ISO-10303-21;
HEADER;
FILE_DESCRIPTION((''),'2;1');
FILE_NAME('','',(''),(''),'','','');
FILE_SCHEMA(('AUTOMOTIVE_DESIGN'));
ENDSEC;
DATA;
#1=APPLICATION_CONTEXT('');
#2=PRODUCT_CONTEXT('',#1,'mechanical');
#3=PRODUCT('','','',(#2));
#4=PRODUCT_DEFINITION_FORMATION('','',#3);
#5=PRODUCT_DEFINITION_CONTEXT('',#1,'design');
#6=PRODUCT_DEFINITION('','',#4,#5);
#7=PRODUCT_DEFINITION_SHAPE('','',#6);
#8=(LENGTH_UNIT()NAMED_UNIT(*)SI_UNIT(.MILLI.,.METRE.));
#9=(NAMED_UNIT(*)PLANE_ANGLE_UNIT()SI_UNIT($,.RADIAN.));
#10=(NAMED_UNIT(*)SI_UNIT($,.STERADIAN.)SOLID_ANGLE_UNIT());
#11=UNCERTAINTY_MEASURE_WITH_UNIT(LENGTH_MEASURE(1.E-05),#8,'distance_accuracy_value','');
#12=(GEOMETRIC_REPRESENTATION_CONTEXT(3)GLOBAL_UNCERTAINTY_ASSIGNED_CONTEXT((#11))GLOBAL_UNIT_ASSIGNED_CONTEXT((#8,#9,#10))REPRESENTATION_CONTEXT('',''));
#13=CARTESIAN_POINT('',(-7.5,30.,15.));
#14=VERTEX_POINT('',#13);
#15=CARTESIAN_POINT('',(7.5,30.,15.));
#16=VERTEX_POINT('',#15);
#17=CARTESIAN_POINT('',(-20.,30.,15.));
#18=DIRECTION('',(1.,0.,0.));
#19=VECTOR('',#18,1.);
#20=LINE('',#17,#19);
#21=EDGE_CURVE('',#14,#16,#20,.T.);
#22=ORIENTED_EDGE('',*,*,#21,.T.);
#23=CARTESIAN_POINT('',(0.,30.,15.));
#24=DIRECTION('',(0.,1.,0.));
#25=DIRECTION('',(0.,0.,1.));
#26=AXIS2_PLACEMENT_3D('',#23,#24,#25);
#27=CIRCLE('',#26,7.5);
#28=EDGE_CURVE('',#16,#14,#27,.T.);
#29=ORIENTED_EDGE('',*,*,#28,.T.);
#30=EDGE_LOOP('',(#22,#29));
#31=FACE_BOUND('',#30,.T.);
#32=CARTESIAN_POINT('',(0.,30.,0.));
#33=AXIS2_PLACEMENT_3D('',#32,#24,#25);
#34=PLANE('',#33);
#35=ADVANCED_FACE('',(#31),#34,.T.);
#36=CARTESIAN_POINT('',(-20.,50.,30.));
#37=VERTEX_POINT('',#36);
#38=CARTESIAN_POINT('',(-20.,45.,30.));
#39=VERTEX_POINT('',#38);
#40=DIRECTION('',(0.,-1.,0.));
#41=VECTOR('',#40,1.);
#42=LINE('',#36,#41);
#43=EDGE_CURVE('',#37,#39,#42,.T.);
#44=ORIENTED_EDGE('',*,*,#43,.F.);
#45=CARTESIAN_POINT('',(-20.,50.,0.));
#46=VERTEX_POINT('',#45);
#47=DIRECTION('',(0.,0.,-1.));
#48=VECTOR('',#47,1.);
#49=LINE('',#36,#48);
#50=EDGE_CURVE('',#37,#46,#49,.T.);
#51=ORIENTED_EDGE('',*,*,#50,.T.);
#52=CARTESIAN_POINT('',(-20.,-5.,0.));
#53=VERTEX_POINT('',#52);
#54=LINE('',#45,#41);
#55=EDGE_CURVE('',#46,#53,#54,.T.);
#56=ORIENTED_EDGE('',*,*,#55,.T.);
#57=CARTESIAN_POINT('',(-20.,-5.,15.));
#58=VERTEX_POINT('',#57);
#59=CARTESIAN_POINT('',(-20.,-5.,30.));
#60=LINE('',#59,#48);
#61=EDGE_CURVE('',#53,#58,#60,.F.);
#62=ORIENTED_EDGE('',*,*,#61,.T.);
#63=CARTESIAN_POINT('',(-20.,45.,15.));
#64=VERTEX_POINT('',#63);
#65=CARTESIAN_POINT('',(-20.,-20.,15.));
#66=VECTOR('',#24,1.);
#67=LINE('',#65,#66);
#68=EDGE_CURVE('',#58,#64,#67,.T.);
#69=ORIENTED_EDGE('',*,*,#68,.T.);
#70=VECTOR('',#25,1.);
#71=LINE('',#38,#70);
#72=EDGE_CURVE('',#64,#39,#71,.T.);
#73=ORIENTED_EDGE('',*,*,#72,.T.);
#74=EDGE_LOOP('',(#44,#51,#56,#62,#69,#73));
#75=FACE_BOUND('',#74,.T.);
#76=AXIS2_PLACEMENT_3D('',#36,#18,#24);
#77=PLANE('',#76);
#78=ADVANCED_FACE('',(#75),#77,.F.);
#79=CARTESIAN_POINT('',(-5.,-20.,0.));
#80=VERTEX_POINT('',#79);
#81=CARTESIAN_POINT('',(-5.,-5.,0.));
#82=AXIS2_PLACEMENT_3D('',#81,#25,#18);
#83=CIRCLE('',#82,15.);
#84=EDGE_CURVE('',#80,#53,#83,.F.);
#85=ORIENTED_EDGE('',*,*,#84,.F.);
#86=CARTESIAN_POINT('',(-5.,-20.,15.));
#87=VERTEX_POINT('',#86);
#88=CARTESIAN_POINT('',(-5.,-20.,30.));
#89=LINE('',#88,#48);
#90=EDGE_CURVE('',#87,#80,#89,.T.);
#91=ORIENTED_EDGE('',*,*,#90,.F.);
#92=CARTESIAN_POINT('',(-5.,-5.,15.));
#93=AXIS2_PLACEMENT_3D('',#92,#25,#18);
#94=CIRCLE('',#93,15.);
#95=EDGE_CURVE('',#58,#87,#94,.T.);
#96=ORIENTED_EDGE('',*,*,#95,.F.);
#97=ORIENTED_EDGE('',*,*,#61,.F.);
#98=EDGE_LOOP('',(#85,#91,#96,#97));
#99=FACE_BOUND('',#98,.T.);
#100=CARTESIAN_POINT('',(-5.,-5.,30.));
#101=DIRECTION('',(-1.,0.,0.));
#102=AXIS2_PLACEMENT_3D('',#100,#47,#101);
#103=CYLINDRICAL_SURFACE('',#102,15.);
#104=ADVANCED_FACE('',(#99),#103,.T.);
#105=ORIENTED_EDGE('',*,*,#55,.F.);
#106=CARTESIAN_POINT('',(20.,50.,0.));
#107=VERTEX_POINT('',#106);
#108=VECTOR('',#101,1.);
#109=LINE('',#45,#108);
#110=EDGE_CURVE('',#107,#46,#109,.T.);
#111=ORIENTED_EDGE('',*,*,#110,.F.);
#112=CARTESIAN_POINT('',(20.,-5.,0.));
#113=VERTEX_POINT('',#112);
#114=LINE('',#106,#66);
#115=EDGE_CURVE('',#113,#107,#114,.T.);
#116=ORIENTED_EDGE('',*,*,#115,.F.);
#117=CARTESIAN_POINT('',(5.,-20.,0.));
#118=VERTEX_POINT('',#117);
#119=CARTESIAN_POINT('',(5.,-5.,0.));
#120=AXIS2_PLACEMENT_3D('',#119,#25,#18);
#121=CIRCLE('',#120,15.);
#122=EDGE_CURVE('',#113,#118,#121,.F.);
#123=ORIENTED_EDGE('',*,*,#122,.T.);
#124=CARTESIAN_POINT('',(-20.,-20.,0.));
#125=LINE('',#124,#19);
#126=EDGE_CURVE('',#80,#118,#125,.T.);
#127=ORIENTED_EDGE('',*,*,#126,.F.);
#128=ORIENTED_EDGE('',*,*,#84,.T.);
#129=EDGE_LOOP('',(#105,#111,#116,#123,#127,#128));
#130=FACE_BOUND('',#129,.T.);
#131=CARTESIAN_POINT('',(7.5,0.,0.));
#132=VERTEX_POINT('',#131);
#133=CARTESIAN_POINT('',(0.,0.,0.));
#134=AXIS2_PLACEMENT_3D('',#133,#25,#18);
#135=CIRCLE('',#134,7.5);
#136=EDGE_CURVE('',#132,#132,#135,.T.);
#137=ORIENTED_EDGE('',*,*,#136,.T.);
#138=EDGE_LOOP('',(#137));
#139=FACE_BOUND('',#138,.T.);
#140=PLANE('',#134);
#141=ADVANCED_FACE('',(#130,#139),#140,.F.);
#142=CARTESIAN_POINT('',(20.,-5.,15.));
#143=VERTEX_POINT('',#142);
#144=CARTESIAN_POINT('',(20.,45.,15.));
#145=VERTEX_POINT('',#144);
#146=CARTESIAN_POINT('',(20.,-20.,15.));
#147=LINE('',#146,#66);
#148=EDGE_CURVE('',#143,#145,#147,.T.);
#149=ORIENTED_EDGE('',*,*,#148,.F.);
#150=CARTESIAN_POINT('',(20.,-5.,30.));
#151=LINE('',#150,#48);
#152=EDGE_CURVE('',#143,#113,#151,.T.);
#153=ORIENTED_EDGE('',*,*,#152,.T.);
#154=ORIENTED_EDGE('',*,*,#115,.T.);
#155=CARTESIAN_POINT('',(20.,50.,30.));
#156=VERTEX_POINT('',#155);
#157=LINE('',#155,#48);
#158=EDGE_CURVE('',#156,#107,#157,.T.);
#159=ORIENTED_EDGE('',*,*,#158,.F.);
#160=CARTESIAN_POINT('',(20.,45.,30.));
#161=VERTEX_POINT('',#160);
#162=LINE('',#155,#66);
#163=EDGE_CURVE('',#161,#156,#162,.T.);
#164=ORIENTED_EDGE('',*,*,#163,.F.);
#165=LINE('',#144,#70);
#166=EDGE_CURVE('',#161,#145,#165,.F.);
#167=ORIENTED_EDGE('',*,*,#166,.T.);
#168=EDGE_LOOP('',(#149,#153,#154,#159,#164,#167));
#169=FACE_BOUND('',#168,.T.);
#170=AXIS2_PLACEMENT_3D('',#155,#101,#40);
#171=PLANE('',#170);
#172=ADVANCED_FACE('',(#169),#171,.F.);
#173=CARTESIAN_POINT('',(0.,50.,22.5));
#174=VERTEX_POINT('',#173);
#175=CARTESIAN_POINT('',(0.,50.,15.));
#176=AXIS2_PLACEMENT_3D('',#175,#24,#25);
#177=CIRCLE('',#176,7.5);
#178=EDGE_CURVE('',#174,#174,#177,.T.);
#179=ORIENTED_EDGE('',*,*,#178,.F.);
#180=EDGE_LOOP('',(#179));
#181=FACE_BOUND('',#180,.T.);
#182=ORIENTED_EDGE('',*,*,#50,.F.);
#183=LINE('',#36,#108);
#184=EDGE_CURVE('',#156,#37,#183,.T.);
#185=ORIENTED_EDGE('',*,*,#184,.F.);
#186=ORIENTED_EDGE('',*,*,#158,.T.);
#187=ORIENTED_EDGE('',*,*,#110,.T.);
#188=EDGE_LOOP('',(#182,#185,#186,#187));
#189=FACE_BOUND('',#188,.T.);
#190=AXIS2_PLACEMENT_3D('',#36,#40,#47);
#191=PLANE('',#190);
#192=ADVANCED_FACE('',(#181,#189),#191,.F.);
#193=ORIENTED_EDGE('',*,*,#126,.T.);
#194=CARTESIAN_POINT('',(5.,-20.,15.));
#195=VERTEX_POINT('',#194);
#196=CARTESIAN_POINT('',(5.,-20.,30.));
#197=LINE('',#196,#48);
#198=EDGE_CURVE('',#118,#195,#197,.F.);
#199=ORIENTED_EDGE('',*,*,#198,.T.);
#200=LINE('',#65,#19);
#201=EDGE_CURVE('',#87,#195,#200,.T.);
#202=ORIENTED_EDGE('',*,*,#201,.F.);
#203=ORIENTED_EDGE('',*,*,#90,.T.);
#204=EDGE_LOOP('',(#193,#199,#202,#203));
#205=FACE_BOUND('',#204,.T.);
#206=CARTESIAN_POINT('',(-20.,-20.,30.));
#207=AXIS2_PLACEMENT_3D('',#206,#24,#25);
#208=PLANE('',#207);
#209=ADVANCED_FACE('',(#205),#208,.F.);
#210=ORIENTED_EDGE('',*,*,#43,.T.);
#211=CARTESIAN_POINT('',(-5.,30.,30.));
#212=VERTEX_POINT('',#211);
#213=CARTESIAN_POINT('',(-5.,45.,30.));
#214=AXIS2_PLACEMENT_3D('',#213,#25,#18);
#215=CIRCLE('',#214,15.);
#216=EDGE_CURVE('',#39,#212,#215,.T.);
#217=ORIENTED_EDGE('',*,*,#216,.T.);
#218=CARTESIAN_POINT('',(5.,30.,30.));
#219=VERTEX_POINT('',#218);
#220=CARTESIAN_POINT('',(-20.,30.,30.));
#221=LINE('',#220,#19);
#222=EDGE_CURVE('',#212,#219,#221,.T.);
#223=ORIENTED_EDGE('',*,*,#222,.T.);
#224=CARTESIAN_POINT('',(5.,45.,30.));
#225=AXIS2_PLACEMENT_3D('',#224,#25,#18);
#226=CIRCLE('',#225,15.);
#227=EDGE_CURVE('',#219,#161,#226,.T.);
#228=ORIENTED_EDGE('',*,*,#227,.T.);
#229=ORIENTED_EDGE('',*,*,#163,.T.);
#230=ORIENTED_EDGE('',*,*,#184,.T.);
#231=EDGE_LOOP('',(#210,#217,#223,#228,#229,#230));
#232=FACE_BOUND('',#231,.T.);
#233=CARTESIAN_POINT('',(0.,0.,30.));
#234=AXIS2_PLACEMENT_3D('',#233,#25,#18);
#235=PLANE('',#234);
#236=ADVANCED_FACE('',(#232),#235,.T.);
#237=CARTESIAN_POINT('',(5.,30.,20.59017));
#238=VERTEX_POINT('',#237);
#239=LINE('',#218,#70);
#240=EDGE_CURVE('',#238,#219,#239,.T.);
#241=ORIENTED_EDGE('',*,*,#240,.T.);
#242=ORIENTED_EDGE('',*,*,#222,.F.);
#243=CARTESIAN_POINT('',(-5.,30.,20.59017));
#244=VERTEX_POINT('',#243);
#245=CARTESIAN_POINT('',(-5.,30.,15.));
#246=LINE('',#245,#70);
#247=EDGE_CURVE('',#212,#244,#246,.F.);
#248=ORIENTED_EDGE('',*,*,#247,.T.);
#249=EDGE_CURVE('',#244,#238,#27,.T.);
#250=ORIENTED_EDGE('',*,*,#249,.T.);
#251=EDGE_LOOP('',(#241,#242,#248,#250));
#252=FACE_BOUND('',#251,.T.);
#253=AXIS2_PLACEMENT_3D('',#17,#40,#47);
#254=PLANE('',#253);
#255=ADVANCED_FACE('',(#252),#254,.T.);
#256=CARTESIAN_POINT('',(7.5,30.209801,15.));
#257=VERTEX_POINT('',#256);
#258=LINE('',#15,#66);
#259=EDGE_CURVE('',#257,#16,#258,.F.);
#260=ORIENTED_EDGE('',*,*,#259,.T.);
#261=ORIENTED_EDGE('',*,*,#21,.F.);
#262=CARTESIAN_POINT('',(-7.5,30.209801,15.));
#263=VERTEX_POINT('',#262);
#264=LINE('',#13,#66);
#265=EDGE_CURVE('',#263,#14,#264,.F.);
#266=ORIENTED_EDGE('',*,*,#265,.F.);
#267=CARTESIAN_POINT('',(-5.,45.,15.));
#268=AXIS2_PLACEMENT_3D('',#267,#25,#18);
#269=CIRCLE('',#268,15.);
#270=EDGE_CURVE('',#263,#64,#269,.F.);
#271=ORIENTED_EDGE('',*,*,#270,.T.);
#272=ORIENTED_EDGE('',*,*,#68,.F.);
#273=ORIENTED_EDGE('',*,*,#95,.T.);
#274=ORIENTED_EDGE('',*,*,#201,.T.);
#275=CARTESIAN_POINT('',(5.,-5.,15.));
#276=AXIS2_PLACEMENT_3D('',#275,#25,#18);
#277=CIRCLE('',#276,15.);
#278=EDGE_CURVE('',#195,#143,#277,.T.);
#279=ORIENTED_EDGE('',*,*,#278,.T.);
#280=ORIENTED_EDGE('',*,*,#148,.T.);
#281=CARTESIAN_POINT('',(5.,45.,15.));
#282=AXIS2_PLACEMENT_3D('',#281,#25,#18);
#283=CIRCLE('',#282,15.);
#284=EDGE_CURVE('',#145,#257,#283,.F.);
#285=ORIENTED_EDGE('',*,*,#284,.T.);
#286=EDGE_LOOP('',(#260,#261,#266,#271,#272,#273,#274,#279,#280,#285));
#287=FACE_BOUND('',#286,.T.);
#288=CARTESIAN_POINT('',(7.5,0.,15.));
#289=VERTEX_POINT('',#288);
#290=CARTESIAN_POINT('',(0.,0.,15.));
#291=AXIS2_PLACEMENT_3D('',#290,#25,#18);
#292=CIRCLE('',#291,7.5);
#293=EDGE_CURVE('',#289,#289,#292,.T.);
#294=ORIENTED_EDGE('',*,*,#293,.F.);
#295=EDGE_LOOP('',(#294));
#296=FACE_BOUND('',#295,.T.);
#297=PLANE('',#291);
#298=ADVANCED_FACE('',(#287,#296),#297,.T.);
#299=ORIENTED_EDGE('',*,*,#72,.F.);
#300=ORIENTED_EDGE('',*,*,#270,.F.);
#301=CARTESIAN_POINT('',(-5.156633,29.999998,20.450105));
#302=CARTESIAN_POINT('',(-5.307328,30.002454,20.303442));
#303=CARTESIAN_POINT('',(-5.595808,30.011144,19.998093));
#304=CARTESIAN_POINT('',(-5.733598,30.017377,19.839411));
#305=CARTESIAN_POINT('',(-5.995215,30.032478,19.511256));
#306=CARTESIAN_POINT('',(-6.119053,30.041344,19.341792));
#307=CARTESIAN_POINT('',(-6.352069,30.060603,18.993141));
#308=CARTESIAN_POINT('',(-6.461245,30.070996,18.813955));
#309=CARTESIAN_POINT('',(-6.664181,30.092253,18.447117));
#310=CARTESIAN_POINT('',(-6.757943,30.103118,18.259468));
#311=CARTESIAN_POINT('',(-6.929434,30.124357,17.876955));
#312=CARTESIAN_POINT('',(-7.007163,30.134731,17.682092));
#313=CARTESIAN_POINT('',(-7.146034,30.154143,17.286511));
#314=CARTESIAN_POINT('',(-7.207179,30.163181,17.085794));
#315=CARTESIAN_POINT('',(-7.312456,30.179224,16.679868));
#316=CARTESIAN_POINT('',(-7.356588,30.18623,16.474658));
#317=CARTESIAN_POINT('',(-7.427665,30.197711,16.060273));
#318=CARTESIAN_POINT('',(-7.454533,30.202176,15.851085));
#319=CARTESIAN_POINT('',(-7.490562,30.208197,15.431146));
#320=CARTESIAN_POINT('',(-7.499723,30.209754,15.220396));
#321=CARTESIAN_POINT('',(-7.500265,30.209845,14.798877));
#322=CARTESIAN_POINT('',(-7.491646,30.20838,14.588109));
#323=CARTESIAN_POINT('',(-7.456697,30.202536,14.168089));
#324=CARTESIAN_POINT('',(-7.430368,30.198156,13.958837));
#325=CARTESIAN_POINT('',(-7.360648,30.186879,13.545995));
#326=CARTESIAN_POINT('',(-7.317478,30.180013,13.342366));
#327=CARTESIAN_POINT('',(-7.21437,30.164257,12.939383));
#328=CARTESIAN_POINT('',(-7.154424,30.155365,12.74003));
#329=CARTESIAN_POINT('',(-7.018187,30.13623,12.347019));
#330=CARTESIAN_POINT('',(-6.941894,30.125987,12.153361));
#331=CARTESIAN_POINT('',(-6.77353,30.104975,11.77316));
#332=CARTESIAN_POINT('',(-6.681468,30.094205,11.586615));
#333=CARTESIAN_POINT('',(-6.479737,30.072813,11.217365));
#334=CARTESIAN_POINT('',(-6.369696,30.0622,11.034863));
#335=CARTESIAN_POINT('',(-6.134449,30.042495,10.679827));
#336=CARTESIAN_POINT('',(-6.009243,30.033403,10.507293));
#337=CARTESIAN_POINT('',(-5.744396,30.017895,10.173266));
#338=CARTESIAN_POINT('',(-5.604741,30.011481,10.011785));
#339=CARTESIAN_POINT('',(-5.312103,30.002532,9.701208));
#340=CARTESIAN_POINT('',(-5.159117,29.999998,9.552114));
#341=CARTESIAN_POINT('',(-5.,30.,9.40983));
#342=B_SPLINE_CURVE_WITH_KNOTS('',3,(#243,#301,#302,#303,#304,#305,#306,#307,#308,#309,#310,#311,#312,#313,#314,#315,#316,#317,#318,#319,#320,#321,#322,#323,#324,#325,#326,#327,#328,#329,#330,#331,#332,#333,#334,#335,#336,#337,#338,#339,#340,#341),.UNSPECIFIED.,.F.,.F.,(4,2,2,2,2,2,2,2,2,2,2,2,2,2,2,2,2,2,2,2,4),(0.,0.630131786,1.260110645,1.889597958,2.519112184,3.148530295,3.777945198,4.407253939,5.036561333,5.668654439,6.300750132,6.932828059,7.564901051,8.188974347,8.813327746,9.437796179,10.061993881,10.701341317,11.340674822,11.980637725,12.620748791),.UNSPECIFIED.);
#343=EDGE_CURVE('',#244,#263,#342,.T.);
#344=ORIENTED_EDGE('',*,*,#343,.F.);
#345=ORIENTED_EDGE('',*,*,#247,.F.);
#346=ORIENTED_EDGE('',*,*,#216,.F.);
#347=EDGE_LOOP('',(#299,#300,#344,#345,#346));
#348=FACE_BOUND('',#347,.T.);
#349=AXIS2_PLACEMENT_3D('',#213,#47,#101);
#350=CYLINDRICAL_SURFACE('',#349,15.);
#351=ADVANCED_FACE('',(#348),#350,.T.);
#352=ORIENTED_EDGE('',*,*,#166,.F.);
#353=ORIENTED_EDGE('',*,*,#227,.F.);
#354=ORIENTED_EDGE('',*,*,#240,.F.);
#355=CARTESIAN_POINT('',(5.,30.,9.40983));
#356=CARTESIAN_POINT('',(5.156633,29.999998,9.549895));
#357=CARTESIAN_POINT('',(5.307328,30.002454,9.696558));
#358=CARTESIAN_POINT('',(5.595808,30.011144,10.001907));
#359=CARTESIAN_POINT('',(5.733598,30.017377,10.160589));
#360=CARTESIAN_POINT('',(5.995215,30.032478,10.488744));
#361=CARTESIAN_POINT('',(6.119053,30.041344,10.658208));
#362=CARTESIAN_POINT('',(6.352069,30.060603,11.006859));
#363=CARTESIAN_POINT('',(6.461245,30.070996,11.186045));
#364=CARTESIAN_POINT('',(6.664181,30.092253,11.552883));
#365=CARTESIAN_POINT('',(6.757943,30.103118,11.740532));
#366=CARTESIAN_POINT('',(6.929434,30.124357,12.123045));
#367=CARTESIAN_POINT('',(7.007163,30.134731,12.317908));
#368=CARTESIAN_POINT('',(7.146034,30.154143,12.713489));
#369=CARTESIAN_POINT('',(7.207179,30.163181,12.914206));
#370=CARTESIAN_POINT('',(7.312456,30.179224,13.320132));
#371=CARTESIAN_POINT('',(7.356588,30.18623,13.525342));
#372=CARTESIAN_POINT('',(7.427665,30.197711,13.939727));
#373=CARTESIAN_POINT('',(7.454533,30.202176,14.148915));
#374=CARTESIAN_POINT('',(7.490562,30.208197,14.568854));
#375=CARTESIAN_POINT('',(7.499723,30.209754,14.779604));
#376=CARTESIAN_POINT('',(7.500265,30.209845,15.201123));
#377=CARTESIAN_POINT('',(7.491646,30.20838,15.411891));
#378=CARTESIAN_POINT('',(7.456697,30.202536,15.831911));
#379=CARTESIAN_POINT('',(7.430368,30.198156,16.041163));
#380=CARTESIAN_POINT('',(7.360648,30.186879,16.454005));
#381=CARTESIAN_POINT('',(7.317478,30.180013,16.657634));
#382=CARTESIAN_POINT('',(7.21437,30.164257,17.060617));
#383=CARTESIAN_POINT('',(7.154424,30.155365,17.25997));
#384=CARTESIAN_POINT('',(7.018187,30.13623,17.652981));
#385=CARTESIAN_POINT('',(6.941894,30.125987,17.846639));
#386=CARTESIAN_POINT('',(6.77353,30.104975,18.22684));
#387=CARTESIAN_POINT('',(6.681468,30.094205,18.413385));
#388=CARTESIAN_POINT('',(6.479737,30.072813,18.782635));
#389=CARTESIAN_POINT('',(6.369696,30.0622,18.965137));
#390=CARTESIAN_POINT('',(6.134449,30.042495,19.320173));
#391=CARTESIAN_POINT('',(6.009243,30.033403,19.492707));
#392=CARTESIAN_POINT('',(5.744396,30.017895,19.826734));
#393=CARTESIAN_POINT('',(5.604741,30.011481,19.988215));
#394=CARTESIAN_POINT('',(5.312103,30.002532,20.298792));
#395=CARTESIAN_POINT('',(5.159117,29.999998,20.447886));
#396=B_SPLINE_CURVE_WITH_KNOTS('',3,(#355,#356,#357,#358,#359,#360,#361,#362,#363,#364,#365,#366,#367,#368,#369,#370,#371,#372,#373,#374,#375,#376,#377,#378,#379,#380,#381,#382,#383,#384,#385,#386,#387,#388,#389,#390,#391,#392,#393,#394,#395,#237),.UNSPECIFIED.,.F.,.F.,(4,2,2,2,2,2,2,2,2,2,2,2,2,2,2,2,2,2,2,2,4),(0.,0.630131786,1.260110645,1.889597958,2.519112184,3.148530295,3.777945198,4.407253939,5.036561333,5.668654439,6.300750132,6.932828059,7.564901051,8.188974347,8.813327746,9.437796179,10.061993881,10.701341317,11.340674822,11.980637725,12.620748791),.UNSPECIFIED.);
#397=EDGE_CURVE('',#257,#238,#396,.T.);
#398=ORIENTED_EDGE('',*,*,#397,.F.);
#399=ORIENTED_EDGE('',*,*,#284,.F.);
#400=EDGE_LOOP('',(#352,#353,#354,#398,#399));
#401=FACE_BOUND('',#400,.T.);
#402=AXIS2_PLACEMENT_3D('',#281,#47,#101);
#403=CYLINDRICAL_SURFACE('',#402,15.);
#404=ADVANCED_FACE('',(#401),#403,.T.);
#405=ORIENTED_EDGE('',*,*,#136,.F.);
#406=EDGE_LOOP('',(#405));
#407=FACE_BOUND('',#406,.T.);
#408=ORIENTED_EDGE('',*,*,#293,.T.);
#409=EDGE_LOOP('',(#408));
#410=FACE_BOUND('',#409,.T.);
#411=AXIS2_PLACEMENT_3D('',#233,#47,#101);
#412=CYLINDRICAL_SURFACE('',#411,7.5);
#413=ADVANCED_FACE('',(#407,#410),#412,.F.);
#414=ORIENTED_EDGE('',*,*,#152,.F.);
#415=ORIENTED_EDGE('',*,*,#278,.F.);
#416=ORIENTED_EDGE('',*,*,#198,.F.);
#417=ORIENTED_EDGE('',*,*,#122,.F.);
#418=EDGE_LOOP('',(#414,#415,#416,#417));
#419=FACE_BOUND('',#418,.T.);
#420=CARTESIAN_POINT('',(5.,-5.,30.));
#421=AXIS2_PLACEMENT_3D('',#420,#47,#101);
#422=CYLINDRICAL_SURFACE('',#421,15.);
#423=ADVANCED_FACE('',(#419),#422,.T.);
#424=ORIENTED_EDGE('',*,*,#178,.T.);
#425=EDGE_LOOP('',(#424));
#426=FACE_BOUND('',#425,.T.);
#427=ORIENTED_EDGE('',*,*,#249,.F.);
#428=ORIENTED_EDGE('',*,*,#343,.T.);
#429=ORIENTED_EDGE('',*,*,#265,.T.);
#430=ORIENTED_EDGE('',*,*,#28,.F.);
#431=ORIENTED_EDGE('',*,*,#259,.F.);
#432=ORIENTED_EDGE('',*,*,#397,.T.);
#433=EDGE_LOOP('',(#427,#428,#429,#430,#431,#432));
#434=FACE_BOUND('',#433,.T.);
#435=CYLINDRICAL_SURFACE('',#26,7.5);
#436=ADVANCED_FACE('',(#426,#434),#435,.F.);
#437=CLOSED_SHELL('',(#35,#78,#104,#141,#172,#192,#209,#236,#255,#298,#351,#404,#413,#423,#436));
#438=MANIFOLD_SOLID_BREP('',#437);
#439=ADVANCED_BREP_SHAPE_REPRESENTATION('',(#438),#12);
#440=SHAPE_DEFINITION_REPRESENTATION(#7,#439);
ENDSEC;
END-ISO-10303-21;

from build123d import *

# Parameters (mm, degrees)
SKETCH1_W           = 40
SKETCH1_H           = 70
SKETCH1_R           = 7.5
BOSS_EXTRUDE1_DEPTH = 30
CUT_EXTRUDE1_DEPTH  = 20
SKETCH3_W           = 40
SKETCH3_H           = 50
CUT_EXTRUDE2_DEPTH  = 15
FILLET1_R           = 15


with BuildPart() as part:
    # Sketch1 → Boss-Extrude1 (new body)
    with BuildSketch(Plane.XY):
        with Locations((0, 15)):
            Rectangle(SKETCH1_W, SKETCH1_H)
        Circle(SKETCH1_R, mode=Mode.SUBTRACT)
    extrude(amount=BOSS_EXTRUDE1_DEPTH)

    # Sketch2 → Cut-Extrude1 (cut)
    with BuildSketch(Plane(origin=(0, 50, 0), x_dir=(1, 0, 0), z_dir=(0, 1, 0))):
        with BuildLine():
            ThreePointArc((7.5, -15), (2.371708245, -7.884875265), (-6, -10.5))
            Line((-6, -10.5), (6, -19.5))
            ThreePointArc((6, -19.5), (7.115124735, -17.371708245), (7.5, -15))
        make_face()
        with BuildLine():
            Line((6, -19.5), (-6, -10.5))
            ThreePointArc((-6, -10.5), (-4.5, -21), (6, -19.5))
        make_face()
    extrude(amount=-CUT_EXTRUDE1_DEPTH, mode=Mode.SUBTRACT)

    # Sketch3 → Cut-Extrude2 (cut)
    with BuildSketch(Plane.XY.offset(30)):
        with Locations((0, 5)):
            Rectangle(SKETCH3_W, SKETCH3_H)
    extrude(amount=-CUT_EXTRUDE2_DEPTH, mode=Mode.SUBTRACT)

    # Fillet1
    # the kernel refuses this fillet: 15 mm, written as the material it takes off along each edge
    with BuildSketch(Plane(origin=(20, -20, -37.5), x_dir=(0, 1, 0), z_dir=(0, 0, 1))) as fillet1_piece_1:
        with BuildLine():
            CenterArc((FILLET1_R, FILLET1_R), FILLET1_R, 180, 90)
            Line((0, FILLET1_R), (0, 0))
            Line((0, 0), (FILLET1_R, 0))
        make_face()
    extrude(amount=90, mode=Mode.SUBTRACT)
    with BuildSketch(Plane(origin=(-20, -20, -37.5), x_dir=(0, 1, 0), z_dir=(0, 0, 1))) as fillet1_piece_2:
        with BuildLine():
            CenterArc((FILLET1_R, -FILLET1_R), FILLET1_R, 90, 90)
            Line((0, -FILLET1_R), (0, 0))
            Line((0, 0), (FILLET1_R, 0))
        make_face()
    extrude(amount=90, mode=Mode.SUBTRACT)
    with BuildSketch(Plane(origin=(-20, 30, 67.5), x_dir=(0, 1, 0), z_dir=(0, 0, -1))) as fillet1_piece_3:
        with BuildLine():
            CenterArc((FILLET1_R, FILLET1_R), FILLET1_R, 180, 90)
            Line((0, FILLET1_R), (0, 0))
            Line((0, 0), (FILLET1_R, 0))
        make_face()
    extrude(amount=52.5, mode=Mode.SUBTRACT)
    with BuildSketch(Plane(origin=(20, 30, 67.5), x_dir=(0, 1, 0), z_dir=(0, 0, -1))) as fillet1_piece_4:
        with BuildLine():
            CenterArc((FILLET1_R, -FILLET1_R), FILLET1_R, 90, 90)
            Line((0, -FILLET1_R), (0, 0))
            Line((0, 0), (FILLET1_R, 0))
        make_face()
    extrude(amount=52.5, mode=Mode.SUBTRACT)


solid = part.part
